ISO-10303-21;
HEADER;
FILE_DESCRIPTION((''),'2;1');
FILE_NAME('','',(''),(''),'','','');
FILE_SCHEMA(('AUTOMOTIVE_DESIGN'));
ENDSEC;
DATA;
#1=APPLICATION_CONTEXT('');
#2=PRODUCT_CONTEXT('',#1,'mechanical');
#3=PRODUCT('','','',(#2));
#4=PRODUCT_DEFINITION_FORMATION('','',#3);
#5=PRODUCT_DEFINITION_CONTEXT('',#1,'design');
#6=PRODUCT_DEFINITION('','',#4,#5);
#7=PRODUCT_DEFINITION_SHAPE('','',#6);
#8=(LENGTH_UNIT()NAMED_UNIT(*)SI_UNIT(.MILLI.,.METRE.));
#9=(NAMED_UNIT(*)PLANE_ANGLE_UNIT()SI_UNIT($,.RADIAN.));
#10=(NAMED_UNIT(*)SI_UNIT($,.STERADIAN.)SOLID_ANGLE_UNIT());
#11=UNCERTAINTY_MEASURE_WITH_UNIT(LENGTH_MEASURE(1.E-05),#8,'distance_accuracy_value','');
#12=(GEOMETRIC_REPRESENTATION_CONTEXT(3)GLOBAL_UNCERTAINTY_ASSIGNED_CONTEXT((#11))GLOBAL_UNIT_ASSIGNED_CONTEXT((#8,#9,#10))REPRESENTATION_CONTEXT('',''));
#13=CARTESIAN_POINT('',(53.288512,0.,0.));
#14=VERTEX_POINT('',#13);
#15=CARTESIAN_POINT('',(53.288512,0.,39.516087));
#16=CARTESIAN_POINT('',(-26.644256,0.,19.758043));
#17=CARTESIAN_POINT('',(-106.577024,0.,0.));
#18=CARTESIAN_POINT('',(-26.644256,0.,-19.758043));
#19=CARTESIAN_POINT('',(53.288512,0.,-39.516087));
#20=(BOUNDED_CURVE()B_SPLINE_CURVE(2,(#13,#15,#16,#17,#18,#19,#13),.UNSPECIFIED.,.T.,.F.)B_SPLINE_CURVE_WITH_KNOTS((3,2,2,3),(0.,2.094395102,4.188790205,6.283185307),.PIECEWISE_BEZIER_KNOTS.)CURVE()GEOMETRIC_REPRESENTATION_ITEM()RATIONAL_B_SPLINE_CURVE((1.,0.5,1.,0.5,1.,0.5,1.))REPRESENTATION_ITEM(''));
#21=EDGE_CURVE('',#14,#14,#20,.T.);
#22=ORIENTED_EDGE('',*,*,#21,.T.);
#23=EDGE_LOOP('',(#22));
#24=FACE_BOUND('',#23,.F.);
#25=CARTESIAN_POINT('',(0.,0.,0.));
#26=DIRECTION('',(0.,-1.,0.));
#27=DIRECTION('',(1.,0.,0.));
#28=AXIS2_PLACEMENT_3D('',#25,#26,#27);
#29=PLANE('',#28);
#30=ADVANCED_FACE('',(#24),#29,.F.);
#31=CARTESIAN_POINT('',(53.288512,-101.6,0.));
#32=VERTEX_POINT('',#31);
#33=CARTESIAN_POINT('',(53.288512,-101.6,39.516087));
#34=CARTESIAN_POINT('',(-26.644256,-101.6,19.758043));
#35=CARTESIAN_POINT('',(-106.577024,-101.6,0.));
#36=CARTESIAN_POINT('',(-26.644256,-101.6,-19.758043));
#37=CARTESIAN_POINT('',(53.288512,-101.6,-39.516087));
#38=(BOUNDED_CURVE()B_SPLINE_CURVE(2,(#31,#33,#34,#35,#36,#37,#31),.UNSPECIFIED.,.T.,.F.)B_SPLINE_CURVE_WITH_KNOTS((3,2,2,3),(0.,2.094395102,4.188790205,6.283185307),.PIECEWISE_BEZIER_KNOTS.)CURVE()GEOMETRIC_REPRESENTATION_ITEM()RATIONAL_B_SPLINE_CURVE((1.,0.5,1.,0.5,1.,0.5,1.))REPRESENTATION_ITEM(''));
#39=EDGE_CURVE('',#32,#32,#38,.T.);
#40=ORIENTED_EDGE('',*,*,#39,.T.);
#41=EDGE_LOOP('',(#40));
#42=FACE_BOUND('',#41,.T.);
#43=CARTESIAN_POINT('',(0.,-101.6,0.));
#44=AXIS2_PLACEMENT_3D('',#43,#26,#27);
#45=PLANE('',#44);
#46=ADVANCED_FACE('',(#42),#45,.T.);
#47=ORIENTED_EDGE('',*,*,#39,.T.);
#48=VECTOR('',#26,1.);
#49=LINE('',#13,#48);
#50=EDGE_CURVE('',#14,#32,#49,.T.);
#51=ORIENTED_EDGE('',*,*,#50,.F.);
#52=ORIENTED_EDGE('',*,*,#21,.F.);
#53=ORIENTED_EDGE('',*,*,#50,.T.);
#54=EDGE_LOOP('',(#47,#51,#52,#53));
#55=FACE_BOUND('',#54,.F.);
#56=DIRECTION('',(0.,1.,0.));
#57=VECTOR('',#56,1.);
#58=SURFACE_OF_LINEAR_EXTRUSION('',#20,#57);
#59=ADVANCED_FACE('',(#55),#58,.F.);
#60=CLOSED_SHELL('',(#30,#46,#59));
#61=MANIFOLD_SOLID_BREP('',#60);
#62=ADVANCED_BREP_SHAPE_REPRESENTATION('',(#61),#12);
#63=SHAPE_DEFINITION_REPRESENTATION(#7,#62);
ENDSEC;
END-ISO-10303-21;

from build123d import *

# Parameters (mm, degrees)
F0_R     = 11.6941232586
F0_R_2   = 7.942283416
F1_DEPTH = 101.6


with BuildPart() as f1:
    # F0 (on Front) → F1 (new body)
    with BuildSketch(Plane.XZ):
        with BuildLine():
            add(Edge.make_bspline(
                [(53.2885119319, 0), (53.2885119319, 39.5160869482), (-26.6442559659, 19.7580434741), (-106.5770238638, 0), (-26.6442559659, -19.7580434741), (53.2885119319, -39.5160869482), (53.2885119319, 0)],
                knots=[0, 0, 0, 2.0943951024, 2.0943951024, 4.1887902048, 4.1887902048, 6.2831853072, 6.2831853072, 6.2831853072], degree=2, weights=[1, 0.5, 1, 0.5, 1, 0.5, 1]))
        make_face()
        with Locations((-22.7055419236, 0)):
            Circle(F0_R, mode=Mode.SUBTRACT)
        with Locations((20.2341880649, 0)):
            Circle(F0_R_2, mode=Mode.SUBTRACT)
        with Locations((-22.7055419236, 0)):
            Circle(F0_R)
        with Locations((20.2341880649, 0)):
            Circle(F0_R_2)
    extrude(amount=F1_DEPTH)


solid = f1.part
